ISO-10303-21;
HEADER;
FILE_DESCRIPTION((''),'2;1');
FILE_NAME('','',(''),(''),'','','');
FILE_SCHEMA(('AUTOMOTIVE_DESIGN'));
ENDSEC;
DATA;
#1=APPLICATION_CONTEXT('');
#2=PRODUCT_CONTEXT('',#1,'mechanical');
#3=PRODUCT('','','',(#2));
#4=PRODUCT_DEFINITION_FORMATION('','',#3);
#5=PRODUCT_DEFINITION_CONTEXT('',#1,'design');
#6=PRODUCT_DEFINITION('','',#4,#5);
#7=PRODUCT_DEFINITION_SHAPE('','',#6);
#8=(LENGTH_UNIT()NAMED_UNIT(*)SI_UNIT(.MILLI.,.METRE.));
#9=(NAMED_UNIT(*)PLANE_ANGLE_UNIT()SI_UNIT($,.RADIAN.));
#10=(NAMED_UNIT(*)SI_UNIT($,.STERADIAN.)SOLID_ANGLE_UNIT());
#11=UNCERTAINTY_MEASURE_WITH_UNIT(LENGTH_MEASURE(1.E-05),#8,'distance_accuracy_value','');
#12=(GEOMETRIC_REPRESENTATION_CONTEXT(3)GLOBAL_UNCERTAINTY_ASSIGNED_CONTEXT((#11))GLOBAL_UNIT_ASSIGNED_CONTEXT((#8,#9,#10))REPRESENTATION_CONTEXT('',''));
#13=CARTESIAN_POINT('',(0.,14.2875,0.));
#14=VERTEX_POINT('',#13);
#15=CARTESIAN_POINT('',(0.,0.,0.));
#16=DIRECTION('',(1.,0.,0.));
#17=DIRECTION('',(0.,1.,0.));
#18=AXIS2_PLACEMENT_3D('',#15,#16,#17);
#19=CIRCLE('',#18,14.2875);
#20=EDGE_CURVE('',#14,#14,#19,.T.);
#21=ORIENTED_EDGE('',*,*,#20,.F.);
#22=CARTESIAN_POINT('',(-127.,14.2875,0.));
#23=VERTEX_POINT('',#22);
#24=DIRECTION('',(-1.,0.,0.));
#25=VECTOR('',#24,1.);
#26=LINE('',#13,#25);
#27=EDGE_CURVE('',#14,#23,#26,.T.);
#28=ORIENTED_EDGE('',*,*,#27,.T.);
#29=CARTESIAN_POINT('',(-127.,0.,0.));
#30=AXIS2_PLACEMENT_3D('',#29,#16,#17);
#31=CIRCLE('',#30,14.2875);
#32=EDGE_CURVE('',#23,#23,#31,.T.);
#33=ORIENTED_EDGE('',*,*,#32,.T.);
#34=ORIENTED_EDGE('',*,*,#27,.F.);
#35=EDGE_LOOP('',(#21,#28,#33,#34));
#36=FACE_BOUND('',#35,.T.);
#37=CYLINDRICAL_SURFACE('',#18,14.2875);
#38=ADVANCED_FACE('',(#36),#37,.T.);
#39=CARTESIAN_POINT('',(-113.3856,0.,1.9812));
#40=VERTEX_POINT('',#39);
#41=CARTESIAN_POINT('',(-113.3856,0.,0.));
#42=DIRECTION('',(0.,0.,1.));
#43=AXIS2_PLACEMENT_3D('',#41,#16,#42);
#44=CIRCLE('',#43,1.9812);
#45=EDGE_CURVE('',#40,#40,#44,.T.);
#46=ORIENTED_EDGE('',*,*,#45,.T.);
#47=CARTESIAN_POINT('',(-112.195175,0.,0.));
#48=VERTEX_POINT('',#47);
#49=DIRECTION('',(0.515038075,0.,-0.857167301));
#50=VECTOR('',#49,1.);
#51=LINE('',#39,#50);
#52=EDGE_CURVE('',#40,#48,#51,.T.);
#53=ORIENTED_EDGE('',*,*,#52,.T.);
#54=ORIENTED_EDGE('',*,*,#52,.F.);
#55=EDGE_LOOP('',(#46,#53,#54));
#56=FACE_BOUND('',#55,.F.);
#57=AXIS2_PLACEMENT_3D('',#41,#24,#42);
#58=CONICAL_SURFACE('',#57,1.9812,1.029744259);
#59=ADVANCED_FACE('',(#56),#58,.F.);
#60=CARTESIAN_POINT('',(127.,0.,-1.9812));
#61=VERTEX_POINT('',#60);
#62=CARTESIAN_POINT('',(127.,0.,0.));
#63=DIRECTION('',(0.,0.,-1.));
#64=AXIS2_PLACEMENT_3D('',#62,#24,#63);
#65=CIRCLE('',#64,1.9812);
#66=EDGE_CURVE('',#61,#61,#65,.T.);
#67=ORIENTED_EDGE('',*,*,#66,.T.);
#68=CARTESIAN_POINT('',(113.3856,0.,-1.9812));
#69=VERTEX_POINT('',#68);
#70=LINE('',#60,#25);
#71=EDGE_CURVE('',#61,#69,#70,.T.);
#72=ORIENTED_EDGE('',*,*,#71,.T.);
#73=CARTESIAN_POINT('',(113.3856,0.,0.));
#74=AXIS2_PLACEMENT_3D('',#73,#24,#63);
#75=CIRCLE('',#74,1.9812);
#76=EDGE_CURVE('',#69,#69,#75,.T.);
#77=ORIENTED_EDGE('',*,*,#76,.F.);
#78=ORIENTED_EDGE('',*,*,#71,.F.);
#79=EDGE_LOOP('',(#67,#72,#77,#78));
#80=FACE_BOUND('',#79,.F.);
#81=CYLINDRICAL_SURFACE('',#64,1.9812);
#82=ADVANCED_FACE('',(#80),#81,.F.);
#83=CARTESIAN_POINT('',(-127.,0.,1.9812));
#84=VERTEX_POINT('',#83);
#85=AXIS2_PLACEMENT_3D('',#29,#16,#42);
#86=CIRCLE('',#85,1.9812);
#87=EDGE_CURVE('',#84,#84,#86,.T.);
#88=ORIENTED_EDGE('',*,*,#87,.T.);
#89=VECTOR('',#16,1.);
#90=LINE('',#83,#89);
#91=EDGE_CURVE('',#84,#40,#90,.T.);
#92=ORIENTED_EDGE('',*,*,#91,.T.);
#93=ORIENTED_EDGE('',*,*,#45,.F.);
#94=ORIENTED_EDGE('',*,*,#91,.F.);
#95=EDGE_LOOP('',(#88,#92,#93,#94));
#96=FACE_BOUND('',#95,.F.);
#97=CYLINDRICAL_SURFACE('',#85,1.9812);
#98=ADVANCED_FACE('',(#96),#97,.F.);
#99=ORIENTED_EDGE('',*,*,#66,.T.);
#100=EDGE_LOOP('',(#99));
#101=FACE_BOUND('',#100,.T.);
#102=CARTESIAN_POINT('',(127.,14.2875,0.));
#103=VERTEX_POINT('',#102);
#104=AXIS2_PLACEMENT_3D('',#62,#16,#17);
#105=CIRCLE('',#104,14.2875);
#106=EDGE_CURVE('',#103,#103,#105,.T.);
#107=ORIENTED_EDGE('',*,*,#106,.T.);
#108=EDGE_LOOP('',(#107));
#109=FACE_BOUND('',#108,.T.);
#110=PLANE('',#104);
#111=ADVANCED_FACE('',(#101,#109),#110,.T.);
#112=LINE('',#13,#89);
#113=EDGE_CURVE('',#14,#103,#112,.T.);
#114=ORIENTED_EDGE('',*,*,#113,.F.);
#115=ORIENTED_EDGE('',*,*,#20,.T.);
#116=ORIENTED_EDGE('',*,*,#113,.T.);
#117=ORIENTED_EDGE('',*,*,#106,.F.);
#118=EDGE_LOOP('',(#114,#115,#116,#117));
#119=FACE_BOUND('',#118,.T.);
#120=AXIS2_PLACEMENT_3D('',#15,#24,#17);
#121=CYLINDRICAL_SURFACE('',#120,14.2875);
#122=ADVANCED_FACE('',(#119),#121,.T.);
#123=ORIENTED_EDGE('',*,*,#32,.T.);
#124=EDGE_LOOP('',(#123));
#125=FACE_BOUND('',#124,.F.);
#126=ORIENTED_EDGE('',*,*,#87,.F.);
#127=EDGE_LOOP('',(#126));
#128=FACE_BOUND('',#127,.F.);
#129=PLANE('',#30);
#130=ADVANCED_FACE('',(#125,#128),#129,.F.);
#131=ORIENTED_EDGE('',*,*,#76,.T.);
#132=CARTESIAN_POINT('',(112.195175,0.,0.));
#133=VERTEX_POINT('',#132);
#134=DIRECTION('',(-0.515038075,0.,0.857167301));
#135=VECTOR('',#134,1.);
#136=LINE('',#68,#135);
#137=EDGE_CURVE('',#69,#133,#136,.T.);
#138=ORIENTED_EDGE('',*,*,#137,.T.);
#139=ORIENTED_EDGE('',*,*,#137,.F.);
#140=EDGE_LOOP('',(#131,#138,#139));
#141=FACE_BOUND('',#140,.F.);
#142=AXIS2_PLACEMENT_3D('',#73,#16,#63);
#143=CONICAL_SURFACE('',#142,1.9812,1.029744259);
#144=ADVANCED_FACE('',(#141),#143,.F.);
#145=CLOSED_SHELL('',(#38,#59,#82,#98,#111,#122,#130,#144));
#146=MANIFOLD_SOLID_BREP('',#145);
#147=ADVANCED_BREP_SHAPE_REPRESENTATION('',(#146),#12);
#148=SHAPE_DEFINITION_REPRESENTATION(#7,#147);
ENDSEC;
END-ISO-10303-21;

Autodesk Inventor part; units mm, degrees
ref_plane "YZ Plane" through (0, 0, 0) normal (1, 0, 0) x (0, 1, 0)
ref_plane "XZ Plane" through (0, 0, 0) normal (0, 1, 0) x (-1, 0, 0)
ref_plane "XY Plane" through (0, 0, 0) normal (0, 0, 1) x (1, 0, 0)
sketch "Sketch1" plane through (0, 0, 0) normal (0, 0, 1) x (1, 0, 0)
  point P0 (0, 0)
sketch "Sketch2" plane through (0, 0, 0) normal (1, 0, 0) x (0, 1, 0)
  circle A0 centre (0, 0) radius 14.2875
  dimension "d0" = 28.575
extrude "Extrusion1" add sketch "Sketch2" along normal mid plane 254
sketch "Sketch3" plane through (127, 0, 0) normal (1, 0, 0) x (0, 0, -1)
  point P0 (0, 0)
  point P1 (0, 0)
sketch "Sketch4" plane through (-127, 0, 0) normal (-1, 0, 0) x (0, 0, 1)
  point P0 (0, 0)
  point P1 (0, 0)
hole "Hole1" at (127, 0, 0) direction (-1, 0, 0) diameter 3.9624 depth 13.6144 tip angle 118 thread size "10-32 UNF" class "2B" standard "ANSI Unified Screw Threads"
hole "Hole2" at (-127, 0, 0) direction (1, 0, 0) diameter 3.9624 depth 13.6144 tip angle 118 thread size "10-32 UNF" class "2B" standard "ANSI Unified Screw Threads"
properties part number "CL2-002" material "Aluminum 6061"
